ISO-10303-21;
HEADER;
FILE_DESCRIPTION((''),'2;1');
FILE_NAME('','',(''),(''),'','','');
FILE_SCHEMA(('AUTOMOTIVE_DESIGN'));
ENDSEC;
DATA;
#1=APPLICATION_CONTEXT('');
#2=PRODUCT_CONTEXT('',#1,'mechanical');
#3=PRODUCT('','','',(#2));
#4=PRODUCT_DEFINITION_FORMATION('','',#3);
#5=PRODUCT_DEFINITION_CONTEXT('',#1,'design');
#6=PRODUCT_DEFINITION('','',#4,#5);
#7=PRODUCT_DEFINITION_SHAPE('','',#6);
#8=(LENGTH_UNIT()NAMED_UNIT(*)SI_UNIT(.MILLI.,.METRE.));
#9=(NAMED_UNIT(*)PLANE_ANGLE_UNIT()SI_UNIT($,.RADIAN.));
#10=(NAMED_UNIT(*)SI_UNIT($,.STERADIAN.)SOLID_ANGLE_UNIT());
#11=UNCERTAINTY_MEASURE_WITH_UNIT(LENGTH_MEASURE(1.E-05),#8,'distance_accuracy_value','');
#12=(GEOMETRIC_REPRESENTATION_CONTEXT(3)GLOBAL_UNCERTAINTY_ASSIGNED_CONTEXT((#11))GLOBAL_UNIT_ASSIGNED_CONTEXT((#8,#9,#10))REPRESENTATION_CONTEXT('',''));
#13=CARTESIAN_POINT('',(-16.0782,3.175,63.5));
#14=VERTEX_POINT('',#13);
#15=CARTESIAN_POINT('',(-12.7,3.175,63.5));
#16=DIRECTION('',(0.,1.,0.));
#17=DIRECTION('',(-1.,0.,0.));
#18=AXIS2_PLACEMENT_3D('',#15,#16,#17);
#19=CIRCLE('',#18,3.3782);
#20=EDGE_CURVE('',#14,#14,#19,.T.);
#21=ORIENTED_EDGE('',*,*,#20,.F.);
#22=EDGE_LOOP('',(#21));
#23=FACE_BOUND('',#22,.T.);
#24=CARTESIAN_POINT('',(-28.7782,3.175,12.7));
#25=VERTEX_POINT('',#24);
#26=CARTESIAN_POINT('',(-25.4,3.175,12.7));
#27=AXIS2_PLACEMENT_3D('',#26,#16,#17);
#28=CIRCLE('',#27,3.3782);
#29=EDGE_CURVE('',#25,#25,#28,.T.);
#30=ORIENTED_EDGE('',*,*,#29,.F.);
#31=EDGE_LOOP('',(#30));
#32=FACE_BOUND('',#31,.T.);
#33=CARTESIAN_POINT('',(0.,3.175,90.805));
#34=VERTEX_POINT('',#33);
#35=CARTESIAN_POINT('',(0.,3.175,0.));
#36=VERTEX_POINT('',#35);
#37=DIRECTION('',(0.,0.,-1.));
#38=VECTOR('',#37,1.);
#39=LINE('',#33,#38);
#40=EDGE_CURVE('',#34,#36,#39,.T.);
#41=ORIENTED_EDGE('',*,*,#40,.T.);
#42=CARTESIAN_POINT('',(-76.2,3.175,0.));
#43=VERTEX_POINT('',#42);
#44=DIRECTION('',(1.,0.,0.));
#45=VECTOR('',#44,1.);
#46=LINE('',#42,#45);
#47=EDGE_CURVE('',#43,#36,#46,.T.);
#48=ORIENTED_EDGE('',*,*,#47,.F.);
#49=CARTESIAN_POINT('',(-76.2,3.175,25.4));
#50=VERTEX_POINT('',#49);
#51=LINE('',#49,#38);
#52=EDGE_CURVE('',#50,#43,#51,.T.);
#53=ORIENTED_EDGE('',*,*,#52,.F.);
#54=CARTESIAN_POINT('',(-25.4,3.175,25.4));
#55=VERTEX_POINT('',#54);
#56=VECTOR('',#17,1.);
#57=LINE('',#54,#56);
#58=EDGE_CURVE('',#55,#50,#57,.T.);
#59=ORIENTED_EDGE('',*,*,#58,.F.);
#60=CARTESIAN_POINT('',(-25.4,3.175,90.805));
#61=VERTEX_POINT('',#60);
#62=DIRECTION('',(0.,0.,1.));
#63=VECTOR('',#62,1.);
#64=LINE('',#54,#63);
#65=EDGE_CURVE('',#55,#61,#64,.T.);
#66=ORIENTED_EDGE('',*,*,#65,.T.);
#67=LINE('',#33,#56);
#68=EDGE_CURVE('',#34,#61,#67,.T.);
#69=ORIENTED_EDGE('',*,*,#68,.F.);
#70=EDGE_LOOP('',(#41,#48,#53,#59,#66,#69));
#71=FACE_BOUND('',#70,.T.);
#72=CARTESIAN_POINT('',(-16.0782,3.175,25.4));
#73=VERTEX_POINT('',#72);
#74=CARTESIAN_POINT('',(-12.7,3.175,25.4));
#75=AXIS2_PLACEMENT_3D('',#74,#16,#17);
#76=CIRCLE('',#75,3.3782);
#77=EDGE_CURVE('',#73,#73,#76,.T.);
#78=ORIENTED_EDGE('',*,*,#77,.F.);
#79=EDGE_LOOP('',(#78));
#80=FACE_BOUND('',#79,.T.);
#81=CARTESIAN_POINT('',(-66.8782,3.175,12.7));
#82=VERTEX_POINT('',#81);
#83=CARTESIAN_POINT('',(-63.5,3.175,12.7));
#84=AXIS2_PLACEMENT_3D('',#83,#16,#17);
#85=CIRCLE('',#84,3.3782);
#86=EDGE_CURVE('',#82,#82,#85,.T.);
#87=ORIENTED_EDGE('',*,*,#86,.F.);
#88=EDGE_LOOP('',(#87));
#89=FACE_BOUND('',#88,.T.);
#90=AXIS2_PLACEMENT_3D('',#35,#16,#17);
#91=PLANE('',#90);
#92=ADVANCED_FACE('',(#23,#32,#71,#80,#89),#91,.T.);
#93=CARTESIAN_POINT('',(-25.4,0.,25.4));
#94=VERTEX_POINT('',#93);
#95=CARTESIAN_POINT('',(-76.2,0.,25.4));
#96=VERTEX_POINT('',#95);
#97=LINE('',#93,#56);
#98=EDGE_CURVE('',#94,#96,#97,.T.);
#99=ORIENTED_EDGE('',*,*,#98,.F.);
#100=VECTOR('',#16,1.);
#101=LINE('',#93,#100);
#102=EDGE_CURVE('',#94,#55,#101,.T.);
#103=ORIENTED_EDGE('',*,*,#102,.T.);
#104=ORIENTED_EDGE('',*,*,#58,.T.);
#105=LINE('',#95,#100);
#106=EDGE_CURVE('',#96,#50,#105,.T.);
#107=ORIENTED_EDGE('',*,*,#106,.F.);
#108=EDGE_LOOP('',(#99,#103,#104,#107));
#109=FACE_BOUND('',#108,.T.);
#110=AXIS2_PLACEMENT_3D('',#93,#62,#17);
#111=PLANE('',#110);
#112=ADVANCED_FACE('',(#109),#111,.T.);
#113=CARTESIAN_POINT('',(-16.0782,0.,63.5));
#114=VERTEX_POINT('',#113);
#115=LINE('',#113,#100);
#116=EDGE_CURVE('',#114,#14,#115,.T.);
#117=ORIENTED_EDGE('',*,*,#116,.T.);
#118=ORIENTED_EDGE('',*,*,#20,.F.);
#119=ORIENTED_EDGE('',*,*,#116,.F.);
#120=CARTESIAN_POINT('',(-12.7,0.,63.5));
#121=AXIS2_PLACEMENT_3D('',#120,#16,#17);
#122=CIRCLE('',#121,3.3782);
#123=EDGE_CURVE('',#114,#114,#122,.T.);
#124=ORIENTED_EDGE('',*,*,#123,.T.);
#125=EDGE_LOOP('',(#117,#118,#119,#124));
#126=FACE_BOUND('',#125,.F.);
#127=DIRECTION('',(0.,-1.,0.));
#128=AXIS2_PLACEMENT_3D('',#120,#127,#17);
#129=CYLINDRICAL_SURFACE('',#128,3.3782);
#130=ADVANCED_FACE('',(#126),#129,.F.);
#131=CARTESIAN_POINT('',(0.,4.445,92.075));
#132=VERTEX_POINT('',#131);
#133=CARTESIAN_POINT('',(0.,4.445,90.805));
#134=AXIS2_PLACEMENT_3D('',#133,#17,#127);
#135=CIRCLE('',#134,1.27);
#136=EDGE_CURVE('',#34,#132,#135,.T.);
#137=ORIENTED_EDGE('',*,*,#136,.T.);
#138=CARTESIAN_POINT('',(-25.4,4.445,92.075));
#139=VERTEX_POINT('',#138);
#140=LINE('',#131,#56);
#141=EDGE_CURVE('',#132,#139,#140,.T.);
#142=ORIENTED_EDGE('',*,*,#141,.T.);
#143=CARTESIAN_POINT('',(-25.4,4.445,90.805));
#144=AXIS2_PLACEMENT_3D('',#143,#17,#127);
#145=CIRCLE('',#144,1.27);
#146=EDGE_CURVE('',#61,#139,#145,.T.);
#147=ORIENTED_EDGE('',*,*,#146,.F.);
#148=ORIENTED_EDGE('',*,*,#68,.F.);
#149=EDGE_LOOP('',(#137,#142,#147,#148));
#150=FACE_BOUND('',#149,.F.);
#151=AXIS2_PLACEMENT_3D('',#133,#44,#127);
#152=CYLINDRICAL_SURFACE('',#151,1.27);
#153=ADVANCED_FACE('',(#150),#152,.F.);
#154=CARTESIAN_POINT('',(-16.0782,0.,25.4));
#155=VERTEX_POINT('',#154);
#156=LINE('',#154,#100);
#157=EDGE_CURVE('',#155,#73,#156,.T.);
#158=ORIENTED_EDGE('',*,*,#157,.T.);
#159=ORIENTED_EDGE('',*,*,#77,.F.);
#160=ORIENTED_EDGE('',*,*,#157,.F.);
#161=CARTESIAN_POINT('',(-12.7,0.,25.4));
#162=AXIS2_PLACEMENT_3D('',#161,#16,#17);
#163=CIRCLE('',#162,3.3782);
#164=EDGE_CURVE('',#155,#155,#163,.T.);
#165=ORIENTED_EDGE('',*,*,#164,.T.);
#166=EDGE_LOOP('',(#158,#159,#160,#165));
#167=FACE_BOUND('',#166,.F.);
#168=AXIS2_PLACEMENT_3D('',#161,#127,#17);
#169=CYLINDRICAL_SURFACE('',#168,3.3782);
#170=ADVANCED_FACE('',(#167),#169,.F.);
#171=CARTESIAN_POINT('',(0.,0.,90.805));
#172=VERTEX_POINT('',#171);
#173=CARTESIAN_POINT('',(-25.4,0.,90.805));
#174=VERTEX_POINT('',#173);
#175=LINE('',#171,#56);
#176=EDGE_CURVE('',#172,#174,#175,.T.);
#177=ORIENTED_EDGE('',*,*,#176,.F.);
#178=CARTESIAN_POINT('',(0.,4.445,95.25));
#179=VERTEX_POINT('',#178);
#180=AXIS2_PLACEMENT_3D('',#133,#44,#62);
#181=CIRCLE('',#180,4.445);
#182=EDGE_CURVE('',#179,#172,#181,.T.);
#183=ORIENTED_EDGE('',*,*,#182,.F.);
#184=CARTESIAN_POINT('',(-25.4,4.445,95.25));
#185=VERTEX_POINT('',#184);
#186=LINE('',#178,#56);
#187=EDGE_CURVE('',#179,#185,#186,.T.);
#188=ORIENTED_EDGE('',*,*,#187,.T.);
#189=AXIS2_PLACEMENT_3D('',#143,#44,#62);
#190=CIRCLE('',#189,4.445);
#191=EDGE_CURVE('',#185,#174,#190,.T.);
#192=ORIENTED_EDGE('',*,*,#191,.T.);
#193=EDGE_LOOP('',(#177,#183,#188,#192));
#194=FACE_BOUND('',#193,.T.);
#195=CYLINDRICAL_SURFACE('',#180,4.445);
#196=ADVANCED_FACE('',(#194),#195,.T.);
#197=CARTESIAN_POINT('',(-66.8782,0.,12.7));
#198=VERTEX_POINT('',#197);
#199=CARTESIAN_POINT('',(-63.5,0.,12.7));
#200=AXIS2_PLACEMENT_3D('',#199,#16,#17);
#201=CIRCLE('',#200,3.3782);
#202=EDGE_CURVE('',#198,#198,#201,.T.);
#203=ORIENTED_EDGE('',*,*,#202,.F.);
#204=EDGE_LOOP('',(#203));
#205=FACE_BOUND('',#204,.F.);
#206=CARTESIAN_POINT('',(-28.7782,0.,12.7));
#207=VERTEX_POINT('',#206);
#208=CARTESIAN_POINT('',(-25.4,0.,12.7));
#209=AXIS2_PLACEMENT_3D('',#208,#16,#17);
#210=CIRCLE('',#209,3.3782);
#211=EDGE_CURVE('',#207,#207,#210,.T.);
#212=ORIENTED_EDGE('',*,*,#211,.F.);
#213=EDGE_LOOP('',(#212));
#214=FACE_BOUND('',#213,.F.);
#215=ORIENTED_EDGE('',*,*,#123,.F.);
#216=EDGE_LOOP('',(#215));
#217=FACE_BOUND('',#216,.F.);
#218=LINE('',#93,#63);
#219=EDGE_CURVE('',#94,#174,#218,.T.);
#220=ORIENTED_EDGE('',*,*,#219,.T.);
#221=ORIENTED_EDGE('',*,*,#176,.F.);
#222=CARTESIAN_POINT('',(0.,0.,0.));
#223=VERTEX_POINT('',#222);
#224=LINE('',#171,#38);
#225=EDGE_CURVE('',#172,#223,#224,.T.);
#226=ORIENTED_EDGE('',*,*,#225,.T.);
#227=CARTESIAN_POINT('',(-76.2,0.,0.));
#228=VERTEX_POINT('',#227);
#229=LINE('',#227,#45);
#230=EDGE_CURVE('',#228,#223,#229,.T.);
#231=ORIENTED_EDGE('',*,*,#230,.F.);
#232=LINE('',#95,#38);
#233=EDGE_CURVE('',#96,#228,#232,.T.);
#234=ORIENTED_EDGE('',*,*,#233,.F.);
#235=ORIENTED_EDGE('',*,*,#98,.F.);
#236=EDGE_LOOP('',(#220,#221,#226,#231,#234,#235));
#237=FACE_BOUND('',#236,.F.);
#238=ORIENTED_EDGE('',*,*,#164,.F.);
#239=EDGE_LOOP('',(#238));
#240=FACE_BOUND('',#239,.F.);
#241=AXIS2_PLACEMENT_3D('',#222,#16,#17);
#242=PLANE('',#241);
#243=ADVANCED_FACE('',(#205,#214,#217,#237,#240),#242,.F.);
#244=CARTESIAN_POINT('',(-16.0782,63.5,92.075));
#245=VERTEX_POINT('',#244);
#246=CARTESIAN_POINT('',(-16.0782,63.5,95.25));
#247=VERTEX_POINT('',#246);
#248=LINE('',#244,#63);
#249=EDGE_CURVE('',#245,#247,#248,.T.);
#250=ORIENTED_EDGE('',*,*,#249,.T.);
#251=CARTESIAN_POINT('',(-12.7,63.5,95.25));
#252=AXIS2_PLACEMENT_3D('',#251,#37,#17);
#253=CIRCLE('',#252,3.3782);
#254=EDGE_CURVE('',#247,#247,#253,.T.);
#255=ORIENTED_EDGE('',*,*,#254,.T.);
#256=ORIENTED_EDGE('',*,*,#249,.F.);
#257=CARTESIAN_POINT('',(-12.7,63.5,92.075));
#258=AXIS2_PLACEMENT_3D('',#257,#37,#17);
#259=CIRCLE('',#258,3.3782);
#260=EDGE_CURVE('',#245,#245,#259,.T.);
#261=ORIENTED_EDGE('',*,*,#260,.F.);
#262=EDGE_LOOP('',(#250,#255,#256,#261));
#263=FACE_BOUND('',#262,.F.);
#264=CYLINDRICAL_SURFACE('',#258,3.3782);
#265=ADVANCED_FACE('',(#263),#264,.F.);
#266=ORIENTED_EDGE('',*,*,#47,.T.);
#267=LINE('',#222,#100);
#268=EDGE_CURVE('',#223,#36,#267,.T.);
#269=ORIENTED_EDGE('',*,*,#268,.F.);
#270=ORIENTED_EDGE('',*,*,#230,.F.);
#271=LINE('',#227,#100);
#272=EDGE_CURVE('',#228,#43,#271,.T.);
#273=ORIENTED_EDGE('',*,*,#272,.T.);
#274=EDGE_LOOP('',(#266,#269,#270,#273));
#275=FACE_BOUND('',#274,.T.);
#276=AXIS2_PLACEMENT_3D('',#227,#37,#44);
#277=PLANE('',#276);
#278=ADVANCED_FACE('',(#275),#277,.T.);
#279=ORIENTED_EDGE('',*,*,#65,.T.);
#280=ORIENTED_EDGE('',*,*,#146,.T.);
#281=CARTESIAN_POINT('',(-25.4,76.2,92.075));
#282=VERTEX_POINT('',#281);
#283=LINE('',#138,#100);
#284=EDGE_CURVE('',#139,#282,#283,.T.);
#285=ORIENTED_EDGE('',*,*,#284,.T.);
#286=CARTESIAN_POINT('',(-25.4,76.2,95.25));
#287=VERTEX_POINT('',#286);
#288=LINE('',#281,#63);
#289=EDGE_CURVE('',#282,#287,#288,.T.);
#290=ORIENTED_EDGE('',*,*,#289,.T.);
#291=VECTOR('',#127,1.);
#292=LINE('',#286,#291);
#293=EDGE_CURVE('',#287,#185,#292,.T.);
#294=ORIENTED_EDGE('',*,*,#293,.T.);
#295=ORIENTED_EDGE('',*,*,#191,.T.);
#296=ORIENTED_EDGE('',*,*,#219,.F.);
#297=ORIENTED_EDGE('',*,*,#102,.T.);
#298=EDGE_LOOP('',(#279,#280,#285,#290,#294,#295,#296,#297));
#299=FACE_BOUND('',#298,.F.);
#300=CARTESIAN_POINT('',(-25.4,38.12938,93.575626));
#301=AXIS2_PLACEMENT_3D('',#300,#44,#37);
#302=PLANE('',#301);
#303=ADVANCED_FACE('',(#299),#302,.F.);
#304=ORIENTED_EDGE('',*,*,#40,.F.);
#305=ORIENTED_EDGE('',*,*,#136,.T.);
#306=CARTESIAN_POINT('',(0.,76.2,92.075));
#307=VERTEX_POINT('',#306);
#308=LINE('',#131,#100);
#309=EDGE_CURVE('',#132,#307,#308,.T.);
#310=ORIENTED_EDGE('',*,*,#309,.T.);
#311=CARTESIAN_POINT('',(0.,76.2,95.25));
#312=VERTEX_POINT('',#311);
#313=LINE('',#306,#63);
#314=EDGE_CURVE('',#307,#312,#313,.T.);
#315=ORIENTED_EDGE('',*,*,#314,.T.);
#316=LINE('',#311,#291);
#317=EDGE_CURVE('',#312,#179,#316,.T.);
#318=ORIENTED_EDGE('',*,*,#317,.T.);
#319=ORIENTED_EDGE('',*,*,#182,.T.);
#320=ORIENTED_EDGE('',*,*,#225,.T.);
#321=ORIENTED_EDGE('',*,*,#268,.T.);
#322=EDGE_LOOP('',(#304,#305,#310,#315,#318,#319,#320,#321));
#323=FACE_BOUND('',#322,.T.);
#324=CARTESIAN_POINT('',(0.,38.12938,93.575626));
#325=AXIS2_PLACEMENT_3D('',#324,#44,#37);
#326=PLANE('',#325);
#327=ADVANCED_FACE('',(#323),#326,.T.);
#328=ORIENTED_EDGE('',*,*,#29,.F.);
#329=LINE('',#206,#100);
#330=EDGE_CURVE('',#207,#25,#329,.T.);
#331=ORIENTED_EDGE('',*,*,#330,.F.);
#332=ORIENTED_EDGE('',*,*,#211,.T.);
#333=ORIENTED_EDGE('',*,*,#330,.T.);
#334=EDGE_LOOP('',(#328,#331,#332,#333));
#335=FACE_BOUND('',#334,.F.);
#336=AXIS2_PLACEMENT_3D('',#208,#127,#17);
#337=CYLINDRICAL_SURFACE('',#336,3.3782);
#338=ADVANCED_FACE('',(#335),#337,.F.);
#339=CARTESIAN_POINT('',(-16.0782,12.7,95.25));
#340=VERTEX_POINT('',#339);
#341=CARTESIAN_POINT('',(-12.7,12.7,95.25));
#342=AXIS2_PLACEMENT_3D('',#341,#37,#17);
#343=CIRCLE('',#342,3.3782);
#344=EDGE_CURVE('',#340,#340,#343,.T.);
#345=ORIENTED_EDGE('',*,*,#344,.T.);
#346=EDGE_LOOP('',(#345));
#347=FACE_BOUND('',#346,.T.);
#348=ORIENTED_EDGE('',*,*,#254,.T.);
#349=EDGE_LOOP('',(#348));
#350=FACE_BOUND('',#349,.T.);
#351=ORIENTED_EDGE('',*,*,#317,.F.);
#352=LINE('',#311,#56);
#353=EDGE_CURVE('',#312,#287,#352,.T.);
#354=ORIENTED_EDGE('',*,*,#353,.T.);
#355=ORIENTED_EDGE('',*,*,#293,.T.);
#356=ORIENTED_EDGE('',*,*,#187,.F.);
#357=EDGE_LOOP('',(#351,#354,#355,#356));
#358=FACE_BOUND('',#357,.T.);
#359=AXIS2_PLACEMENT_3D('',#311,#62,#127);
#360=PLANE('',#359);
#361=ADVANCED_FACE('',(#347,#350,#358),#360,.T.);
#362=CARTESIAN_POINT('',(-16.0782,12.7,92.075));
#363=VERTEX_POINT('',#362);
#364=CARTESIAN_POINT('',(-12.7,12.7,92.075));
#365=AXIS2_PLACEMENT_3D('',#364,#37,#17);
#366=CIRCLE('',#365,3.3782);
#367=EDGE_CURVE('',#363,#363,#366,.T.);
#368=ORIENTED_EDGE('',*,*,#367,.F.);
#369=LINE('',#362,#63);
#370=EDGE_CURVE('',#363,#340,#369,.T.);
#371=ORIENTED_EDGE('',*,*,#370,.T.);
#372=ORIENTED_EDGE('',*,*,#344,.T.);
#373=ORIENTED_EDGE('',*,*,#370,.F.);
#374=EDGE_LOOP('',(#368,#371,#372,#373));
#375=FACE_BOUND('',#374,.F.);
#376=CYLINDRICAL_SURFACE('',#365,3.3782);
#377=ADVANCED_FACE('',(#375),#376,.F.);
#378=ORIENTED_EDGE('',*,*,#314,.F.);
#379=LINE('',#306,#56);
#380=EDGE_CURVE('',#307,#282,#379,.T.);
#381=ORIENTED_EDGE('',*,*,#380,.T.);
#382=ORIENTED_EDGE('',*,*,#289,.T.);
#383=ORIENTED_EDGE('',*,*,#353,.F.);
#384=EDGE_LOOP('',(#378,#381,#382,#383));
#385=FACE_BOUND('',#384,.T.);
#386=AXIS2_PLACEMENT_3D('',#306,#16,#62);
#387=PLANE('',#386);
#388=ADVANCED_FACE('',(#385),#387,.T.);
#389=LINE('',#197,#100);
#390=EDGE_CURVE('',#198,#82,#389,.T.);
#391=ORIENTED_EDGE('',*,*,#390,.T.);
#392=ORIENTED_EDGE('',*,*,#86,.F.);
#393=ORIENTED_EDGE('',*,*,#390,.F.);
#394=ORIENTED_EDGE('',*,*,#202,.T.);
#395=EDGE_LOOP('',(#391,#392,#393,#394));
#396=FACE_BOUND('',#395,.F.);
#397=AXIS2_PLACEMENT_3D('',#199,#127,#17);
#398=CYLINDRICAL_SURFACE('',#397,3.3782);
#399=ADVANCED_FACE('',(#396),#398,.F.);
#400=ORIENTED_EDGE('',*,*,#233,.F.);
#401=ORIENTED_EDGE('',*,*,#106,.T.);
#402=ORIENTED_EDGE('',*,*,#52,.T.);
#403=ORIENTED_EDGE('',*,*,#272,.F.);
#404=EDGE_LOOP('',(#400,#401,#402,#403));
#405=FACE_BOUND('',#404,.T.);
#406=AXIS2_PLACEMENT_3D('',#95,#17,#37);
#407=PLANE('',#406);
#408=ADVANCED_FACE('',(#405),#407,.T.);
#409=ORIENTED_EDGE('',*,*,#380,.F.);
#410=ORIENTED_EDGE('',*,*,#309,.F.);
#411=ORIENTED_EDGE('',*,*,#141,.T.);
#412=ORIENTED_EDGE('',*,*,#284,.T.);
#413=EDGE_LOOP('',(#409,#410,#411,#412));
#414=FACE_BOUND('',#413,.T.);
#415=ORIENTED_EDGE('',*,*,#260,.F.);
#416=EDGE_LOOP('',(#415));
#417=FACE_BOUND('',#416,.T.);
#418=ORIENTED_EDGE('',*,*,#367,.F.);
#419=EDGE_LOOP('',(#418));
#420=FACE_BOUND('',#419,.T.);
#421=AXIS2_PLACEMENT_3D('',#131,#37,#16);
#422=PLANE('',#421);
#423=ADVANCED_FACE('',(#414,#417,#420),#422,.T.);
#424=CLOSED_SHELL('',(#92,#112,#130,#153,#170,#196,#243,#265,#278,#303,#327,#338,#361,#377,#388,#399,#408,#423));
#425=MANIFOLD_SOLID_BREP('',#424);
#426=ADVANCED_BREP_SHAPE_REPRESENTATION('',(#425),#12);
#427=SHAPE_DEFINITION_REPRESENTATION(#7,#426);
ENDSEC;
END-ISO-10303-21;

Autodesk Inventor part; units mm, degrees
ref_plane "YZ Plane" through (0, 0, 0) normal (1, 0, 0) x (0, 1, 0)
ref_plane "XZ Plane" through (0, 0, 0) normal (0, 1, 0) x (-1, 0, 0)
ref_plane "XY Plane" through (0, 0, 0) normal (0, 0, 1) x (1, 0, 0)
sketch "Sketch1" plane through (0, 0, 0) normal (0, 1, 0) x (-1, 0, 0)
  line L0 (0, 0) -> (0, 76.2)
  line L1 (25.4, 76.2) -> (25.4, 25.4)
  line L2 (25.4, 25.4) -> (76.2, 25.4)
  line L3 (76.2, 25.4) -> (76.2, 0)
  line L4 (76.2, 0) -> (0, 0)
  line L5 (25.4, 25.4) -> (0, 0) construction
  circle A0 centre (12.7, 63.5) radius 3.3782
  circle A1 centre (12.7, 25.4) radius 3.3782
  circle A2 centre (25.4, 12.7) radius 3.3782
  circle A3 centre (63.5, 12.7) radius 3.3782
  line L6 (25.4, 76.2) -> (25.4, 95.25)
  line L7 (25.4, 95.25) -> (0, 95.25)
  line L8 (0, 95.25) -> (0, 76.2)
  point P0 (0, 0)
  dimension "d0" = 76.2
  dimension "d1" = 25.4
  dimension "d2" = 50.8
  dimension "d3" = 50.8
  dimension "d4" = 25.4
  dimension "d5" = 6.7564
  dimension "d6" = 6.7564
  dimension "d7" = 6.7564
  dimension "d8" = 6.7564
  dimension "d9" = 12.7
  dimension "d10" = 0
  dimension "d11" = 12.7
  dimension "d12" = 12.7
  dimension "d13" = 12.7
  dimension "d15" = 12.7
  dimension "d17" = 19.05
extrude "Plate1" add sketch "Sketch1" along normal blind 3.175
sketch "Sketch2" plane through (0, 0, 92.075) normal (0, 0, 1) x (1, 0, 0)
  line L0 (-25.4, 0) -> (0, 0)
  line L1 (0, 0) -> (0, 76.2)
  line L2 (0, 76.2) -> (-25.4, 76.2)
  line L3 (-25.4, 76.2) -> (-25.4, 0)
edge flange "Flange1" height 76.2 angle 90 thickness 3.175 bend radius 1.27 thickness toward (0, 0, 1) relief tear relief width 3.175 relief depth 1.5875 edges at (-12.7, 3.175, 95.25) wall of the first edge with corners at (-25.4, 0, 92.075) (0, 0, 92.075) (0, 76.2, 92.075) (-25.4, 76.2, 92.075)
bend "Bend1"
corner "Corner1"
sketch "Sketch3" plane through (0, 76.2, 92.075) normal (0, 0, -1) x (-1, 0, 0)
  line L0 (25.4, 0) -> (0, 0) projected
  circle A0 centre (12.7, -12.7) radius 3.3782
  circle A1 centre (12.7, -63.5) radius 3.3782
  point P0 (0, -76.2)
  dimension "d29" = 6.7564
  dimension "d30" = 6.7564
  dimension "d31" = 12.7
  dimension "d32" = 50.8
extrude "Cut1" cut sketch "Sketch3" against normal blind 3.175
equation "\"d33\" = Thickness"
equation "\"d19\" = BendReliefWidth"
equation "\"d20\" = BendReliefDepth"
equation "\"d21\" = MinimumRemnant"
equation "\"d22\" = BendRadius"
equation "\"d26\" = CornerReliefSize"
equation "\"d27\" = GapSize"
equation "\"d28\" = JacobiRadiusSize"
equation "\"BendRadius\" = Thickness"
equation "\"BendReliefWidth\" = Thickness"
equation "\"BendReliefDepth\" = 0.5 * Thickness"
equation "\"CornerReliefSize\" = 4 * Thickness"
equation "\"MinimumRemnant\" = 2 * Thickness"
equation "\"TransitionRadius\" = BendRadius"
equation "\"JacobiRadiusSize\" = BendRadius"
equation "\"GapSize\" = Thickness"
equation "\"d18\" = BendRadius"
equation "\"Thickness\" = 3.175"
properties part number "Rebuild Gusset 2" material "Aluminum 6061"
